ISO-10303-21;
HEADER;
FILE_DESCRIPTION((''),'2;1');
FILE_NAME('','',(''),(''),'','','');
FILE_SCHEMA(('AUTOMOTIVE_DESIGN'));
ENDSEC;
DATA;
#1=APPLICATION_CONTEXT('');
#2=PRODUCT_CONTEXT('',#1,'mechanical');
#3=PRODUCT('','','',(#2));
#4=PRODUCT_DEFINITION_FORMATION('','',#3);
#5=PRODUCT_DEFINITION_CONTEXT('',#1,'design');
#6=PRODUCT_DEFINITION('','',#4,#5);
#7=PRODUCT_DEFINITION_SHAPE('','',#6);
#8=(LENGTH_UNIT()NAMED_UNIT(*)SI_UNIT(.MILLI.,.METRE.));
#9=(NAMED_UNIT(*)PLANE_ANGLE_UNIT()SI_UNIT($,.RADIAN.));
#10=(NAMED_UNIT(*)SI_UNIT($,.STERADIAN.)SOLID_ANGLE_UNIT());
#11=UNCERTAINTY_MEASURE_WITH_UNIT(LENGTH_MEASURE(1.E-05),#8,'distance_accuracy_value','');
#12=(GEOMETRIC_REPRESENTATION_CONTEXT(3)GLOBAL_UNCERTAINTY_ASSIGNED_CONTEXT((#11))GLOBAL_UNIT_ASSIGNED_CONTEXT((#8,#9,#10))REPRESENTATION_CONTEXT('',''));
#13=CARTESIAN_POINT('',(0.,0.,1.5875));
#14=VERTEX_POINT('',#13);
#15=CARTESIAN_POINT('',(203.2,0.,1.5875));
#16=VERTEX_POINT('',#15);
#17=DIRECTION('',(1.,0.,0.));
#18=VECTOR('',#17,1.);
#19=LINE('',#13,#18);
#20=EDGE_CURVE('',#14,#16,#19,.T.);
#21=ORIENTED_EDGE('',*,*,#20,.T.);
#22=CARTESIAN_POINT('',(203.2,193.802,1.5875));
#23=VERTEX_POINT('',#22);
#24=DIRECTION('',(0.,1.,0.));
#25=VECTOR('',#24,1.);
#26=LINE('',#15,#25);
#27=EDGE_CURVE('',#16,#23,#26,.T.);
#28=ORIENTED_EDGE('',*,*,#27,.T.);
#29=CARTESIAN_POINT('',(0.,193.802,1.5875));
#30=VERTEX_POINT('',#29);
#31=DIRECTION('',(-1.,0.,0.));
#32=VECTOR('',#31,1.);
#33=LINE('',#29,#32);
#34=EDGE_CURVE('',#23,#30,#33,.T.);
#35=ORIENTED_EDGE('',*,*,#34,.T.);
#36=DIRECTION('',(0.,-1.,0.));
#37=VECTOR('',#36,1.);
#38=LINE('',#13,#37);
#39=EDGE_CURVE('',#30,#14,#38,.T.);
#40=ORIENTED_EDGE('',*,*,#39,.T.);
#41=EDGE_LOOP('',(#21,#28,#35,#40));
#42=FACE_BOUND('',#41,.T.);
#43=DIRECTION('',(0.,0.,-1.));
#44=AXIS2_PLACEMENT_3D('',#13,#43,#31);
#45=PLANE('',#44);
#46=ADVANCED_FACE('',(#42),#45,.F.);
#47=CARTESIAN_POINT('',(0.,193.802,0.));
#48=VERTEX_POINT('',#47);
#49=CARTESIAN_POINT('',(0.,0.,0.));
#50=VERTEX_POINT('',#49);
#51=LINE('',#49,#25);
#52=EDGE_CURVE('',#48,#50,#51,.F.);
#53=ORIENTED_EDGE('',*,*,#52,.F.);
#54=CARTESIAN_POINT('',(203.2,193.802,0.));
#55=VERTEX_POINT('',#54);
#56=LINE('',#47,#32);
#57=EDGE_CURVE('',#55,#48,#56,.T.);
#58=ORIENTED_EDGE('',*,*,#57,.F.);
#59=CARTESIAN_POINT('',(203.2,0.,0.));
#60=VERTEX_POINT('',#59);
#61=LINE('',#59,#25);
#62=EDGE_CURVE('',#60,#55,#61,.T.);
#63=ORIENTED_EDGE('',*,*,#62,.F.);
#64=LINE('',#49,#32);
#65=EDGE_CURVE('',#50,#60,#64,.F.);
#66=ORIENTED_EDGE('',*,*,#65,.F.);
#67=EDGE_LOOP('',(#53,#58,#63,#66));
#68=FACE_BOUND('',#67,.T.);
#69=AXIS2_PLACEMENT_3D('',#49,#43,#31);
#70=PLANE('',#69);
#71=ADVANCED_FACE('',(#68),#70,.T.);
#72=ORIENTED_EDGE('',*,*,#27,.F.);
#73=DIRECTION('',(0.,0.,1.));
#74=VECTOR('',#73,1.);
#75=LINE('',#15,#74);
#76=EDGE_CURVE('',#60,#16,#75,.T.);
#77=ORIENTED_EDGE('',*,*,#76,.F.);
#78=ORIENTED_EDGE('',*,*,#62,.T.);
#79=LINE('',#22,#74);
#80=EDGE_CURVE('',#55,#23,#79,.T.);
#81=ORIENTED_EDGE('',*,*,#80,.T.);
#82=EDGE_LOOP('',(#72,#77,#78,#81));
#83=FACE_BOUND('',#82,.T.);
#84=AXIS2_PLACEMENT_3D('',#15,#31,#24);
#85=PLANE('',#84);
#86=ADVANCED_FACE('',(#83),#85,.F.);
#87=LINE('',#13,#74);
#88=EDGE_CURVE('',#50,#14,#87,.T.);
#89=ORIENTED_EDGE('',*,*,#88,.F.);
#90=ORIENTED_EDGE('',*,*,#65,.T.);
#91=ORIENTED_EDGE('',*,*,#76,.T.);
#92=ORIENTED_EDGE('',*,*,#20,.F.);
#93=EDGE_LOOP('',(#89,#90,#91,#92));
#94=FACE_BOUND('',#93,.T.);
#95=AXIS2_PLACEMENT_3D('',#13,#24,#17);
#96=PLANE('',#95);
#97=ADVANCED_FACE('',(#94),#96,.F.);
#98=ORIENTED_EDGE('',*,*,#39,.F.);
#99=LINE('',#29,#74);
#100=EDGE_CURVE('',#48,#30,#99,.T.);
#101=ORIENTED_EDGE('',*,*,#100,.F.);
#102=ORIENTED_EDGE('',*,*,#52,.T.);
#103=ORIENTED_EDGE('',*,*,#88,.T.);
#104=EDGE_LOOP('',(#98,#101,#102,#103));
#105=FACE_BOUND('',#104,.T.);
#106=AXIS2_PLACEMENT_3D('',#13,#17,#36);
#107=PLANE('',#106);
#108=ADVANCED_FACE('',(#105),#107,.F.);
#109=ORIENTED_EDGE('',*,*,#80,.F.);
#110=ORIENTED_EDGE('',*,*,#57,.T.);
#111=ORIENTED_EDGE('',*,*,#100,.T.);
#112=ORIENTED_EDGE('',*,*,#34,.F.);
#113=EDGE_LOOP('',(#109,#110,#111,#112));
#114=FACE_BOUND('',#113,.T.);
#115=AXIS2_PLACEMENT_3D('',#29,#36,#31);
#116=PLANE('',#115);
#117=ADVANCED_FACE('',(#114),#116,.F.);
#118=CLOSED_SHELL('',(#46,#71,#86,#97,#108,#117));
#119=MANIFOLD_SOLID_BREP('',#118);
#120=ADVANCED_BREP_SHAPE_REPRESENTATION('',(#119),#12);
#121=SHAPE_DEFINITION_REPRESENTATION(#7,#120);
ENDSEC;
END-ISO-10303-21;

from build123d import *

# Parameters (mm, degrees)
SKETCH1_W           = 203.2
SKETCH1_H           = 193.802
BOSS_EXTRUDE1_DEPTH = 1.5875


with BuildPart() as part:
    # Sketch1 → Boss-Extrude1 (new body)
    with BuildSketch(Plane.XY):
        with Locations((101.6, 96.901)):
            Rectangle(SKETCH1_W, SKETCH1_H)
    extrude(amount=BOSS_EXTRUDE1_DEPTH)


solid = part.part
